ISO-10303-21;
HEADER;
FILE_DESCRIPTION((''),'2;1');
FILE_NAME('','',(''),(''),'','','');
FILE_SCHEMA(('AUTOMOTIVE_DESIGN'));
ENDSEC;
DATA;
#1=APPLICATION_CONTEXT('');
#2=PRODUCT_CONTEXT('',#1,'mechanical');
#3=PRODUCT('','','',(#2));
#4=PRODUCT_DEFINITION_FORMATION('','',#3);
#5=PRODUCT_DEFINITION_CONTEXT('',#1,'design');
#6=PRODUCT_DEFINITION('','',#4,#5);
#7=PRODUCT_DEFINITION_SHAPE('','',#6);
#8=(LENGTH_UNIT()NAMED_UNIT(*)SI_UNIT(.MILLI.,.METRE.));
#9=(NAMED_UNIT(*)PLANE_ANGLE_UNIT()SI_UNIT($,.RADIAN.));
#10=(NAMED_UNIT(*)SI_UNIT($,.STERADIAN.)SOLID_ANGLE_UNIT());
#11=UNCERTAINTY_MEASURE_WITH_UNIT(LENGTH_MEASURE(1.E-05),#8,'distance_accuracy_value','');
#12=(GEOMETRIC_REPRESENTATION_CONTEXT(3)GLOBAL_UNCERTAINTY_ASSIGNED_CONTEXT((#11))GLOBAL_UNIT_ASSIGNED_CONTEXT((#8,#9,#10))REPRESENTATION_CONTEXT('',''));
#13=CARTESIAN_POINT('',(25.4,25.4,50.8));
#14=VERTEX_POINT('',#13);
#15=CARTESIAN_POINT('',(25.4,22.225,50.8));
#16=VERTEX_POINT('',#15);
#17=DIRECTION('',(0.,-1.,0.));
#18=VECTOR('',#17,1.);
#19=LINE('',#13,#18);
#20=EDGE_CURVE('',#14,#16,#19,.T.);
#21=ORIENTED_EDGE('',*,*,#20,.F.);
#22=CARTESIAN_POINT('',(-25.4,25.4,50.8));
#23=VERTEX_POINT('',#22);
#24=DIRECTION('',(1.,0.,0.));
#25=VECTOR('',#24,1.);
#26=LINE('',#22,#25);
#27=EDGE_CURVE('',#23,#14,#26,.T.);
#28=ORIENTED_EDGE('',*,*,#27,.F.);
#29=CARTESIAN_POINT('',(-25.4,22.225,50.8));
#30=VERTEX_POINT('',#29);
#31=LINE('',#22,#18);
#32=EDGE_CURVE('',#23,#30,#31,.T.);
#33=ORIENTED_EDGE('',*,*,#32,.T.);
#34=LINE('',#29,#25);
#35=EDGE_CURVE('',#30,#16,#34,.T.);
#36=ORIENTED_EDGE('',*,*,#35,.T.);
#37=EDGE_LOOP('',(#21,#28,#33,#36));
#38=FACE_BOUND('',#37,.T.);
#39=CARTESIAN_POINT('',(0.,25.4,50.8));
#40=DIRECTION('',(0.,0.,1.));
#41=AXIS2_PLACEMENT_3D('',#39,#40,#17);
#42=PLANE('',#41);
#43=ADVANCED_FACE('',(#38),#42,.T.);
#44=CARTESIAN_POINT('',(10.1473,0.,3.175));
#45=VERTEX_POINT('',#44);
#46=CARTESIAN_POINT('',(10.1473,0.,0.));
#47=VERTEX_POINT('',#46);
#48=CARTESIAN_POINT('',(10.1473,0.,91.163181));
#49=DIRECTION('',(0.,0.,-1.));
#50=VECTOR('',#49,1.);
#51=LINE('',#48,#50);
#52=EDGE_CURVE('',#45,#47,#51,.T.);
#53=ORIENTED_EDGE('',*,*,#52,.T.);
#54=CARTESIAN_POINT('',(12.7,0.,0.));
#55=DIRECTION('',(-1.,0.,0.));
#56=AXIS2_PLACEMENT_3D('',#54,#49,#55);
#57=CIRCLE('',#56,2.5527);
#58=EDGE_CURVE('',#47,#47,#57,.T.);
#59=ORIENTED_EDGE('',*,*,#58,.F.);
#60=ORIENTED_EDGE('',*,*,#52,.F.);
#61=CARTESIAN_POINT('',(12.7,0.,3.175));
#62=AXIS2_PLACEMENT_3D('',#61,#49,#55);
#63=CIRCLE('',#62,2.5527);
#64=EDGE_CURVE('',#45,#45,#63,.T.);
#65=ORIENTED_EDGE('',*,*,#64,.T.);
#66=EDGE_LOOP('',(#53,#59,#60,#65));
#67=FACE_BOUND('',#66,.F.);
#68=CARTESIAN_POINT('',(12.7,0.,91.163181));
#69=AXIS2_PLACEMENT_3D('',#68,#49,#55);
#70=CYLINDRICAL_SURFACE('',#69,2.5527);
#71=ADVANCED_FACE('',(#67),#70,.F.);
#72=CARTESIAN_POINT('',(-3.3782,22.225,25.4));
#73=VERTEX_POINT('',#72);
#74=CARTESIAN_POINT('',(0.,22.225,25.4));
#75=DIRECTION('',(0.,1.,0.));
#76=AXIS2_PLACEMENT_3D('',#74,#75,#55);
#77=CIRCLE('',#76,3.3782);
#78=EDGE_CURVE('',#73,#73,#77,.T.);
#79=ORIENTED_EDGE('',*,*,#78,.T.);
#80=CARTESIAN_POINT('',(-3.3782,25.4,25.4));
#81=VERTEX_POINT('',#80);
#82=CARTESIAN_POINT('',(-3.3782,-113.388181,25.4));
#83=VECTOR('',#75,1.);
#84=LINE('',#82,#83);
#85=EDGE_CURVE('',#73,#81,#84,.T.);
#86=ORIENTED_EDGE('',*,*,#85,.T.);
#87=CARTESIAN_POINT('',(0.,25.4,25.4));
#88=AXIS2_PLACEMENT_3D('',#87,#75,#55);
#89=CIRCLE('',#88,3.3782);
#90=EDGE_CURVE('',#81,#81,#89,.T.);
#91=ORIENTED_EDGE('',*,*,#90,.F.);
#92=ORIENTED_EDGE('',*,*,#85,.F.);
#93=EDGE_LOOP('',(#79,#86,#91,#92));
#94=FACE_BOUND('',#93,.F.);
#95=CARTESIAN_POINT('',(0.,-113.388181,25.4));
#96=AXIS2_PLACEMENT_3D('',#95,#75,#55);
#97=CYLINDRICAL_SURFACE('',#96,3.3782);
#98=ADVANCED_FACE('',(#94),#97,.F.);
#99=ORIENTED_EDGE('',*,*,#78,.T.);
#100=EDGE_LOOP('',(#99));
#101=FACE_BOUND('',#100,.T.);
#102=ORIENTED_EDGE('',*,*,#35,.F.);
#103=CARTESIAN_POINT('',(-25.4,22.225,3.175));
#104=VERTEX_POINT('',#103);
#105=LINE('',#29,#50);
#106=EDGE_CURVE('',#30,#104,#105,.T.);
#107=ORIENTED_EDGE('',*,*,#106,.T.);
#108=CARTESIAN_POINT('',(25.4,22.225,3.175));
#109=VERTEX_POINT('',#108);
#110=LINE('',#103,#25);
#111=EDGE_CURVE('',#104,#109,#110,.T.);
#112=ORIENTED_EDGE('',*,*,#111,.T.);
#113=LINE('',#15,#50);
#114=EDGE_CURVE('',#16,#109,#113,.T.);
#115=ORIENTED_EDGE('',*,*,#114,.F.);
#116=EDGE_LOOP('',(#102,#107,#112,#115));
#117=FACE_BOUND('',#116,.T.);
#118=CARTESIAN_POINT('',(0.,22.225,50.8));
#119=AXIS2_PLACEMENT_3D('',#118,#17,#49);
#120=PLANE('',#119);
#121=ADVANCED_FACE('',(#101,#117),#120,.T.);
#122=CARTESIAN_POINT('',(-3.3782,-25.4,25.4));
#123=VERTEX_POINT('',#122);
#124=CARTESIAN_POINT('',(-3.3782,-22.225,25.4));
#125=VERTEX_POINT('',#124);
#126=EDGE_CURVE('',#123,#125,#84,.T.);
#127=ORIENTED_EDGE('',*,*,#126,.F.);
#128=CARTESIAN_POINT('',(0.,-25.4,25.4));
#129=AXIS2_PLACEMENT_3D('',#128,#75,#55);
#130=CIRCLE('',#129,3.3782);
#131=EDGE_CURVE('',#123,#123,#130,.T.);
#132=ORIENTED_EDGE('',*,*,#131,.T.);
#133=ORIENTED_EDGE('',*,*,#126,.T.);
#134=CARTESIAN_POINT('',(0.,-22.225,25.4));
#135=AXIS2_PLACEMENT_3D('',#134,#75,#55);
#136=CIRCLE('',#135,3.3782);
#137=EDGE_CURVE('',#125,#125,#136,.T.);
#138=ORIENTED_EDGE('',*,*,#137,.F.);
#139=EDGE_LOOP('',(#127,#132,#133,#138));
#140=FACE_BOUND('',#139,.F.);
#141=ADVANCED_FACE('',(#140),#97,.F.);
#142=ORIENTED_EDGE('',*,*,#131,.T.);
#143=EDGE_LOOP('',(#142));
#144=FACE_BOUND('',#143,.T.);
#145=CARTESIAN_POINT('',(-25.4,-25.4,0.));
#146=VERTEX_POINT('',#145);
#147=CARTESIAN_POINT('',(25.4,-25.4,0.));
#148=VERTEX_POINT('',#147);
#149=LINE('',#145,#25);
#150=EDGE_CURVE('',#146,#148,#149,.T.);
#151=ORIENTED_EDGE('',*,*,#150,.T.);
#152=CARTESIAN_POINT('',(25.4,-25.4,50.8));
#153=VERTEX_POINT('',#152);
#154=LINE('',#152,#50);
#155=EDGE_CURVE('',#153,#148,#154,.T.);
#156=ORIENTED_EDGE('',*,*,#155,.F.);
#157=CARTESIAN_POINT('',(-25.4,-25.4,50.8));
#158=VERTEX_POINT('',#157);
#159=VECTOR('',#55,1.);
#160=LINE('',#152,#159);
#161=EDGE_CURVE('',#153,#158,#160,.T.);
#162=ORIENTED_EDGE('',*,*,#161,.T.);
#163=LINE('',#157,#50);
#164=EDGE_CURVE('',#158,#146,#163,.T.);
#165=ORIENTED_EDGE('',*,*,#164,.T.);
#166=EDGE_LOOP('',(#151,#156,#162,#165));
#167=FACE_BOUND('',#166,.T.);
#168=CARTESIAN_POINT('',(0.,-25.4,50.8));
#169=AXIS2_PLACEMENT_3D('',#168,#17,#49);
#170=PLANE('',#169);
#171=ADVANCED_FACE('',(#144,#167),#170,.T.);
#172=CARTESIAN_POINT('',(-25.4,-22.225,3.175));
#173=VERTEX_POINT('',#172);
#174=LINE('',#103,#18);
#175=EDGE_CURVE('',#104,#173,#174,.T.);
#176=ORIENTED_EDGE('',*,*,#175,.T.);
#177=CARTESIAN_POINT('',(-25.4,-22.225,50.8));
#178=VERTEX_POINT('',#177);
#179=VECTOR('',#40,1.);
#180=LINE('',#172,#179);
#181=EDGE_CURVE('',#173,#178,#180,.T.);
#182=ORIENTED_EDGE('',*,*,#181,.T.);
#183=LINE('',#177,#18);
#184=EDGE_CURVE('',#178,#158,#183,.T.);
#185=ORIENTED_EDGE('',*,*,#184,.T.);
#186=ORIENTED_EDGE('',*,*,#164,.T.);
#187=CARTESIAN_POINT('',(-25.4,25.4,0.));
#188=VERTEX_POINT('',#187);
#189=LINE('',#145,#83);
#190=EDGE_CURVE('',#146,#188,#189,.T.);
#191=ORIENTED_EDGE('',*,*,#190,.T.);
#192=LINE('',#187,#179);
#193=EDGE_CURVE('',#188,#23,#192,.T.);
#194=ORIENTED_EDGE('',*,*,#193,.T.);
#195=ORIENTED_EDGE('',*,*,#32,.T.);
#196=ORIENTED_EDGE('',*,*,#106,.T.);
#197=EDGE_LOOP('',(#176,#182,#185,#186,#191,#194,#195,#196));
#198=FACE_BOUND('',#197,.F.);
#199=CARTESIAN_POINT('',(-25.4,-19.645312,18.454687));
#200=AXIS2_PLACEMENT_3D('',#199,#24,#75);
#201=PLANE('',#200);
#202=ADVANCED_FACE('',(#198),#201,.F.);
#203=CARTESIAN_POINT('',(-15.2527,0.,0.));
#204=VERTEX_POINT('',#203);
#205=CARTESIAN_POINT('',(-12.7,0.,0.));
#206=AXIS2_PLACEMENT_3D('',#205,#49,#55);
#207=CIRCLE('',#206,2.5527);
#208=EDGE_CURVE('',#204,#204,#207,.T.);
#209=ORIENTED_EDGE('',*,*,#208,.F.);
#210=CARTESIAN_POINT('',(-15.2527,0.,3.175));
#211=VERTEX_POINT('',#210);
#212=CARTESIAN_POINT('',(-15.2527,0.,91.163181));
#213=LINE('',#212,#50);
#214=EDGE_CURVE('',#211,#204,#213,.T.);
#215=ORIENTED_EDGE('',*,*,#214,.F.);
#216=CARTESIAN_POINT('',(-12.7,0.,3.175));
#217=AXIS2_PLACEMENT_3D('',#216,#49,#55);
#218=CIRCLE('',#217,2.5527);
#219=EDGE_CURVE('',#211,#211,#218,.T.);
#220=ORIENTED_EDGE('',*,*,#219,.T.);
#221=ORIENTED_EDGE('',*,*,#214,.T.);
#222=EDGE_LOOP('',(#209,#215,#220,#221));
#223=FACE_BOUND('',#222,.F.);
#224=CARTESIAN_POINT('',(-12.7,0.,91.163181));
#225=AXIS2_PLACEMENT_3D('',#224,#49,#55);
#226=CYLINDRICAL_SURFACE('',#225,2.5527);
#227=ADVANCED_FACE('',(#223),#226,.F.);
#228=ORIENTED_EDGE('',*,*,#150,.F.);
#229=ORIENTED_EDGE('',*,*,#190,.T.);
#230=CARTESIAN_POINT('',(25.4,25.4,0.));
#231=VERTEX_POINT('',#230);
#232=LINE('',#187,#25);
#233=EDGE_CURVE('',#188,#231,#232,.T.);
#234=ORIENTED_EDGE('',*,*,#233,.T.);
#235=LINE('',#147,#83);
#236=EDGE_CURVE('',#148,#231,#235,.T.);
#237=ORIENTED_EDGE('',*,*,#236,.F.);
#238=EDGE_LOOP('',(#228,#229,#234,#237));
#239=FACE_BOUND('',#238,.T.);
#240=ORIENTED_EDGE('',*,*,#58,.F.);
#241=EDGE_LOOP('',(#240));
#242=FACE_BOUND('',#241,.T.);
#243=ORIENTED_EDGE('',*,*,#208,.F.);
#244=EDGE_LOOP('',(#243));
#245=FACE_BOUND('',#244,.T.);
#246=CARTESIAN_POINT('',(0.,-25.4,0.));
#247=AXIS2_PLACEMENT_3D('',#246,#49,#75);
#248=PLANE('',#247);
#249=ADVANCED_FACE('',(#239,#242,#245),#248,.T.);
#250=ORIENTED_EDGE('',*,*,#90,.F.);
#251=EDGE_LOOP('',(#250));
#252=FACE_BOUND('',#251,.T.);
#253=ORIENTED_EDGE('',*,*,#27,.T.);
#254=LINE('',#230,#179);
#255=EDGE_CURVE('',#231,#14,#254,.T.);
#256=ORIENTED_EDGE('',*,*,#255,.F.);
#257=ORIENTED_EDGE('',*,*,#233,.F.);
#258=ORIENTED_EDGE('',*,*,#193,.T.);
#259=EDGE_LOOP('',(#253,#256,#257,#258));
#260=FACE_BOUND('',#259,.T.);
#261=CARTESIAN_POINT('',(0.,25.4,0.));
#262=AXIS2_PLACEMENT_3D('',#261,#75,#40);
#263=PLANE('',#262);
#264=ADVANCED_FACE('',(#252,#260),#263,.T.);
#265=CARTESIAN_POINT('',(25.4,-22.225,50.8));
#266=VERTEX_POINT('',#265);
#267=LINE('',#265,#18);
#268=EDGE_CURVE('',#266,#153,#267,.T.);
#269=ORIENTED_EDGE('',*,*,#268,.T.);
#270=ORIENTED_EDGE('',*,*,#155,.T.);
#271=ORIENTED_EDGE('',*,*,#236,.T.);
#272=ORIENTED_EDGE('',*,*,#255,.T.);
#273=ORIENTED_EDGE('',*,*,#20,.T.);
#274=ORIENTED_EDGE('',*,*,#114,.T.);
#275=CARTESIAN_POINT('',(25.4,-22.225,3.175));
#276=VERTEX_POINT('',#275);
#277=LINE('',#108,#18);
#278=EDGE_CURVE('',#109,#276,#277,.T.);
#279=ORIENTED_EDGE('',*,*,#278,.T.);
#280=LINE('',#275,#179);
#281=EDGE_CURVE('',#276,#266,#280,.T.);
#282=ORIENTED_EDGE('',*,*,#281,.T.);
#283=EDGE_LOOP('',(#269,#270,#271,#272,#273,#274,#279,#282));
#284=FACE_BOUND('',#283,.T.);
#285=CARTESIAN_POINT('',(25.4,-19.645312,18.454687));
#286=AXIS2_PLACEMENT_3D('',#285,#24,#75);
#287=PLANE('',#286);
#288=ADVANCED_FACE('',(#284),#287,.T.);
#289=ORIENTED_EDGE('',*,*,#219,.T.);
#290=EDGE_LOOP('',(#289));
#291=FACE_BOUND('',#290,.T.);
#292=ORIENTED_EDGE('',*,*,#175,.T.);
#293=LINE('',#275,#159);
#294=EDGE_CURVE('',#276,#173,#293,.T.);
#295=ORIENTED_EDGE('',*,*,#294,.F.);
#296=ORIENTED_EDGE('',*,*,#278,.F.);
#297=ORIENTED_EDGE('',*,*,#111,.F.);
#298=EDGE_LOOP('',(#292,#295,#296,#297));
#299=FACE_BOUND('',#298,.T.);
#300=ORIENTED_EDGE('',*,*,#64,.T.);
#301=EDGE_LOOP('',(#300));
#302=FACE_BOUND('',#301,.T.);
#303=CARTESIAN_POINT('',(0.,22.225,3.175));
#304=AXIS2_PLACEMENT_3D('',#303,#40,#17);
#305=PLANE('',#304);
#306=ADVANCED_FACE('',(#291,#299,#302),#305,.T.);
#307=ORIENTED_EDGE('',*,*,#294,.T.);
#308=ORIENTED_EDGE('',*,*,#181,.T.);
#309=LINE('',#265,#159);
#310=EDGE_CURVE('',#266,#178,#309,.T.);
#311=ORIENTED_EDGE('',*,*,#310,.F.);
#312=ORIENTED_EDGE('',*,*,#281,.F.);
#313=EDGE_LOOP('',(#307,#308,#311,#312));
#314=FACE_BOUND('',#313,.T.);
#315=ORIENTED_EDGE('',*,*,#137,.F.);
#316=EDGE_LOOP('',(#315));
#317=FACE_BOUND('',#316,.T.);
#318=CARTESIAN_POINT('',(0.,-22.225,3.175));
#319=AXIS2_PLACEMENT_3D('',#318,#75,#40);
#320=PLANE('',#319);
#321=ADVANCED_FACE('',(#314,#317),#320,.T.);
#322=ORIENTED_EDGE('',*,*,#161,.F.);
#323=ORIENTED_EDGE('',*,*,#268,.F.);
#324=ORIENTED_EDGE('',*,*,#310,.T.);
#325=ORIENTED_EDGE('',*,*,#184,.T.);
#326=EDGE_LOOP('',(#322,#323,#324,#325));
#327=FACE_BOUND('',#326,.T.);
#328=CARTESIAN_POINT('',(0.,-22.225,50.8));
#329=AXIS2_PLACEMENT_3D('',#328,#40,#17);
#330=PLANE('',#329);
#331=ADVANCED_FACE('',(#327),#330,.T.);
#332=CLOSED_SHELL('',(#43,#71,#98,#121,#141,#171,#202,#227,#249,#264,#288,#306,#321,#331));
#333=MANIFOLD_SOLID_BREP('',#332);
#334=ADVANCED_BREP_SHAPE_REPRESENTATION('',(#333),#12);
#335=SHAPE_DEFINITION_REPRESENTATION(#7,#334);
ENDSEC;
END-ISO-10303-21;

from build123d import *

# Parameters (mm, degrees)
F1_DEPTH = 25.4
F3_D     = 5.1054
F5_D     = 6.7564


with BuildPart() as f1:
    # F0 (on Right) → F1 (new body, symmetric)
    with BuildSketch(Plane.YZ):
        Polygon((-25.4, 50.8), (-25.4, 0), (0, 0), (0, 3.175), (-22.225, 3.175), (-22.225, 50.8), align=None)
        Polygon((0, 3.175), (0, 0), (25.4, 0), (25.4, 50.8), (22.225, 50.8), (22.225, 3.175), align=None)
    extrude(amount=F1_DEPTH, both=True)

    # F3 (through all)
    with Locations(Plane.XY.offset(3.175)):
        with Locations((-12.7, 0), (12.7, 0)):
            Hole(F3_D / 2)

    # F5 (through all)
    with Locations(Plane.XZ.offset(25.4)):
        with Locations((0, 25.4)):
            Hole(F5_D / 2)


solid = f1.part
